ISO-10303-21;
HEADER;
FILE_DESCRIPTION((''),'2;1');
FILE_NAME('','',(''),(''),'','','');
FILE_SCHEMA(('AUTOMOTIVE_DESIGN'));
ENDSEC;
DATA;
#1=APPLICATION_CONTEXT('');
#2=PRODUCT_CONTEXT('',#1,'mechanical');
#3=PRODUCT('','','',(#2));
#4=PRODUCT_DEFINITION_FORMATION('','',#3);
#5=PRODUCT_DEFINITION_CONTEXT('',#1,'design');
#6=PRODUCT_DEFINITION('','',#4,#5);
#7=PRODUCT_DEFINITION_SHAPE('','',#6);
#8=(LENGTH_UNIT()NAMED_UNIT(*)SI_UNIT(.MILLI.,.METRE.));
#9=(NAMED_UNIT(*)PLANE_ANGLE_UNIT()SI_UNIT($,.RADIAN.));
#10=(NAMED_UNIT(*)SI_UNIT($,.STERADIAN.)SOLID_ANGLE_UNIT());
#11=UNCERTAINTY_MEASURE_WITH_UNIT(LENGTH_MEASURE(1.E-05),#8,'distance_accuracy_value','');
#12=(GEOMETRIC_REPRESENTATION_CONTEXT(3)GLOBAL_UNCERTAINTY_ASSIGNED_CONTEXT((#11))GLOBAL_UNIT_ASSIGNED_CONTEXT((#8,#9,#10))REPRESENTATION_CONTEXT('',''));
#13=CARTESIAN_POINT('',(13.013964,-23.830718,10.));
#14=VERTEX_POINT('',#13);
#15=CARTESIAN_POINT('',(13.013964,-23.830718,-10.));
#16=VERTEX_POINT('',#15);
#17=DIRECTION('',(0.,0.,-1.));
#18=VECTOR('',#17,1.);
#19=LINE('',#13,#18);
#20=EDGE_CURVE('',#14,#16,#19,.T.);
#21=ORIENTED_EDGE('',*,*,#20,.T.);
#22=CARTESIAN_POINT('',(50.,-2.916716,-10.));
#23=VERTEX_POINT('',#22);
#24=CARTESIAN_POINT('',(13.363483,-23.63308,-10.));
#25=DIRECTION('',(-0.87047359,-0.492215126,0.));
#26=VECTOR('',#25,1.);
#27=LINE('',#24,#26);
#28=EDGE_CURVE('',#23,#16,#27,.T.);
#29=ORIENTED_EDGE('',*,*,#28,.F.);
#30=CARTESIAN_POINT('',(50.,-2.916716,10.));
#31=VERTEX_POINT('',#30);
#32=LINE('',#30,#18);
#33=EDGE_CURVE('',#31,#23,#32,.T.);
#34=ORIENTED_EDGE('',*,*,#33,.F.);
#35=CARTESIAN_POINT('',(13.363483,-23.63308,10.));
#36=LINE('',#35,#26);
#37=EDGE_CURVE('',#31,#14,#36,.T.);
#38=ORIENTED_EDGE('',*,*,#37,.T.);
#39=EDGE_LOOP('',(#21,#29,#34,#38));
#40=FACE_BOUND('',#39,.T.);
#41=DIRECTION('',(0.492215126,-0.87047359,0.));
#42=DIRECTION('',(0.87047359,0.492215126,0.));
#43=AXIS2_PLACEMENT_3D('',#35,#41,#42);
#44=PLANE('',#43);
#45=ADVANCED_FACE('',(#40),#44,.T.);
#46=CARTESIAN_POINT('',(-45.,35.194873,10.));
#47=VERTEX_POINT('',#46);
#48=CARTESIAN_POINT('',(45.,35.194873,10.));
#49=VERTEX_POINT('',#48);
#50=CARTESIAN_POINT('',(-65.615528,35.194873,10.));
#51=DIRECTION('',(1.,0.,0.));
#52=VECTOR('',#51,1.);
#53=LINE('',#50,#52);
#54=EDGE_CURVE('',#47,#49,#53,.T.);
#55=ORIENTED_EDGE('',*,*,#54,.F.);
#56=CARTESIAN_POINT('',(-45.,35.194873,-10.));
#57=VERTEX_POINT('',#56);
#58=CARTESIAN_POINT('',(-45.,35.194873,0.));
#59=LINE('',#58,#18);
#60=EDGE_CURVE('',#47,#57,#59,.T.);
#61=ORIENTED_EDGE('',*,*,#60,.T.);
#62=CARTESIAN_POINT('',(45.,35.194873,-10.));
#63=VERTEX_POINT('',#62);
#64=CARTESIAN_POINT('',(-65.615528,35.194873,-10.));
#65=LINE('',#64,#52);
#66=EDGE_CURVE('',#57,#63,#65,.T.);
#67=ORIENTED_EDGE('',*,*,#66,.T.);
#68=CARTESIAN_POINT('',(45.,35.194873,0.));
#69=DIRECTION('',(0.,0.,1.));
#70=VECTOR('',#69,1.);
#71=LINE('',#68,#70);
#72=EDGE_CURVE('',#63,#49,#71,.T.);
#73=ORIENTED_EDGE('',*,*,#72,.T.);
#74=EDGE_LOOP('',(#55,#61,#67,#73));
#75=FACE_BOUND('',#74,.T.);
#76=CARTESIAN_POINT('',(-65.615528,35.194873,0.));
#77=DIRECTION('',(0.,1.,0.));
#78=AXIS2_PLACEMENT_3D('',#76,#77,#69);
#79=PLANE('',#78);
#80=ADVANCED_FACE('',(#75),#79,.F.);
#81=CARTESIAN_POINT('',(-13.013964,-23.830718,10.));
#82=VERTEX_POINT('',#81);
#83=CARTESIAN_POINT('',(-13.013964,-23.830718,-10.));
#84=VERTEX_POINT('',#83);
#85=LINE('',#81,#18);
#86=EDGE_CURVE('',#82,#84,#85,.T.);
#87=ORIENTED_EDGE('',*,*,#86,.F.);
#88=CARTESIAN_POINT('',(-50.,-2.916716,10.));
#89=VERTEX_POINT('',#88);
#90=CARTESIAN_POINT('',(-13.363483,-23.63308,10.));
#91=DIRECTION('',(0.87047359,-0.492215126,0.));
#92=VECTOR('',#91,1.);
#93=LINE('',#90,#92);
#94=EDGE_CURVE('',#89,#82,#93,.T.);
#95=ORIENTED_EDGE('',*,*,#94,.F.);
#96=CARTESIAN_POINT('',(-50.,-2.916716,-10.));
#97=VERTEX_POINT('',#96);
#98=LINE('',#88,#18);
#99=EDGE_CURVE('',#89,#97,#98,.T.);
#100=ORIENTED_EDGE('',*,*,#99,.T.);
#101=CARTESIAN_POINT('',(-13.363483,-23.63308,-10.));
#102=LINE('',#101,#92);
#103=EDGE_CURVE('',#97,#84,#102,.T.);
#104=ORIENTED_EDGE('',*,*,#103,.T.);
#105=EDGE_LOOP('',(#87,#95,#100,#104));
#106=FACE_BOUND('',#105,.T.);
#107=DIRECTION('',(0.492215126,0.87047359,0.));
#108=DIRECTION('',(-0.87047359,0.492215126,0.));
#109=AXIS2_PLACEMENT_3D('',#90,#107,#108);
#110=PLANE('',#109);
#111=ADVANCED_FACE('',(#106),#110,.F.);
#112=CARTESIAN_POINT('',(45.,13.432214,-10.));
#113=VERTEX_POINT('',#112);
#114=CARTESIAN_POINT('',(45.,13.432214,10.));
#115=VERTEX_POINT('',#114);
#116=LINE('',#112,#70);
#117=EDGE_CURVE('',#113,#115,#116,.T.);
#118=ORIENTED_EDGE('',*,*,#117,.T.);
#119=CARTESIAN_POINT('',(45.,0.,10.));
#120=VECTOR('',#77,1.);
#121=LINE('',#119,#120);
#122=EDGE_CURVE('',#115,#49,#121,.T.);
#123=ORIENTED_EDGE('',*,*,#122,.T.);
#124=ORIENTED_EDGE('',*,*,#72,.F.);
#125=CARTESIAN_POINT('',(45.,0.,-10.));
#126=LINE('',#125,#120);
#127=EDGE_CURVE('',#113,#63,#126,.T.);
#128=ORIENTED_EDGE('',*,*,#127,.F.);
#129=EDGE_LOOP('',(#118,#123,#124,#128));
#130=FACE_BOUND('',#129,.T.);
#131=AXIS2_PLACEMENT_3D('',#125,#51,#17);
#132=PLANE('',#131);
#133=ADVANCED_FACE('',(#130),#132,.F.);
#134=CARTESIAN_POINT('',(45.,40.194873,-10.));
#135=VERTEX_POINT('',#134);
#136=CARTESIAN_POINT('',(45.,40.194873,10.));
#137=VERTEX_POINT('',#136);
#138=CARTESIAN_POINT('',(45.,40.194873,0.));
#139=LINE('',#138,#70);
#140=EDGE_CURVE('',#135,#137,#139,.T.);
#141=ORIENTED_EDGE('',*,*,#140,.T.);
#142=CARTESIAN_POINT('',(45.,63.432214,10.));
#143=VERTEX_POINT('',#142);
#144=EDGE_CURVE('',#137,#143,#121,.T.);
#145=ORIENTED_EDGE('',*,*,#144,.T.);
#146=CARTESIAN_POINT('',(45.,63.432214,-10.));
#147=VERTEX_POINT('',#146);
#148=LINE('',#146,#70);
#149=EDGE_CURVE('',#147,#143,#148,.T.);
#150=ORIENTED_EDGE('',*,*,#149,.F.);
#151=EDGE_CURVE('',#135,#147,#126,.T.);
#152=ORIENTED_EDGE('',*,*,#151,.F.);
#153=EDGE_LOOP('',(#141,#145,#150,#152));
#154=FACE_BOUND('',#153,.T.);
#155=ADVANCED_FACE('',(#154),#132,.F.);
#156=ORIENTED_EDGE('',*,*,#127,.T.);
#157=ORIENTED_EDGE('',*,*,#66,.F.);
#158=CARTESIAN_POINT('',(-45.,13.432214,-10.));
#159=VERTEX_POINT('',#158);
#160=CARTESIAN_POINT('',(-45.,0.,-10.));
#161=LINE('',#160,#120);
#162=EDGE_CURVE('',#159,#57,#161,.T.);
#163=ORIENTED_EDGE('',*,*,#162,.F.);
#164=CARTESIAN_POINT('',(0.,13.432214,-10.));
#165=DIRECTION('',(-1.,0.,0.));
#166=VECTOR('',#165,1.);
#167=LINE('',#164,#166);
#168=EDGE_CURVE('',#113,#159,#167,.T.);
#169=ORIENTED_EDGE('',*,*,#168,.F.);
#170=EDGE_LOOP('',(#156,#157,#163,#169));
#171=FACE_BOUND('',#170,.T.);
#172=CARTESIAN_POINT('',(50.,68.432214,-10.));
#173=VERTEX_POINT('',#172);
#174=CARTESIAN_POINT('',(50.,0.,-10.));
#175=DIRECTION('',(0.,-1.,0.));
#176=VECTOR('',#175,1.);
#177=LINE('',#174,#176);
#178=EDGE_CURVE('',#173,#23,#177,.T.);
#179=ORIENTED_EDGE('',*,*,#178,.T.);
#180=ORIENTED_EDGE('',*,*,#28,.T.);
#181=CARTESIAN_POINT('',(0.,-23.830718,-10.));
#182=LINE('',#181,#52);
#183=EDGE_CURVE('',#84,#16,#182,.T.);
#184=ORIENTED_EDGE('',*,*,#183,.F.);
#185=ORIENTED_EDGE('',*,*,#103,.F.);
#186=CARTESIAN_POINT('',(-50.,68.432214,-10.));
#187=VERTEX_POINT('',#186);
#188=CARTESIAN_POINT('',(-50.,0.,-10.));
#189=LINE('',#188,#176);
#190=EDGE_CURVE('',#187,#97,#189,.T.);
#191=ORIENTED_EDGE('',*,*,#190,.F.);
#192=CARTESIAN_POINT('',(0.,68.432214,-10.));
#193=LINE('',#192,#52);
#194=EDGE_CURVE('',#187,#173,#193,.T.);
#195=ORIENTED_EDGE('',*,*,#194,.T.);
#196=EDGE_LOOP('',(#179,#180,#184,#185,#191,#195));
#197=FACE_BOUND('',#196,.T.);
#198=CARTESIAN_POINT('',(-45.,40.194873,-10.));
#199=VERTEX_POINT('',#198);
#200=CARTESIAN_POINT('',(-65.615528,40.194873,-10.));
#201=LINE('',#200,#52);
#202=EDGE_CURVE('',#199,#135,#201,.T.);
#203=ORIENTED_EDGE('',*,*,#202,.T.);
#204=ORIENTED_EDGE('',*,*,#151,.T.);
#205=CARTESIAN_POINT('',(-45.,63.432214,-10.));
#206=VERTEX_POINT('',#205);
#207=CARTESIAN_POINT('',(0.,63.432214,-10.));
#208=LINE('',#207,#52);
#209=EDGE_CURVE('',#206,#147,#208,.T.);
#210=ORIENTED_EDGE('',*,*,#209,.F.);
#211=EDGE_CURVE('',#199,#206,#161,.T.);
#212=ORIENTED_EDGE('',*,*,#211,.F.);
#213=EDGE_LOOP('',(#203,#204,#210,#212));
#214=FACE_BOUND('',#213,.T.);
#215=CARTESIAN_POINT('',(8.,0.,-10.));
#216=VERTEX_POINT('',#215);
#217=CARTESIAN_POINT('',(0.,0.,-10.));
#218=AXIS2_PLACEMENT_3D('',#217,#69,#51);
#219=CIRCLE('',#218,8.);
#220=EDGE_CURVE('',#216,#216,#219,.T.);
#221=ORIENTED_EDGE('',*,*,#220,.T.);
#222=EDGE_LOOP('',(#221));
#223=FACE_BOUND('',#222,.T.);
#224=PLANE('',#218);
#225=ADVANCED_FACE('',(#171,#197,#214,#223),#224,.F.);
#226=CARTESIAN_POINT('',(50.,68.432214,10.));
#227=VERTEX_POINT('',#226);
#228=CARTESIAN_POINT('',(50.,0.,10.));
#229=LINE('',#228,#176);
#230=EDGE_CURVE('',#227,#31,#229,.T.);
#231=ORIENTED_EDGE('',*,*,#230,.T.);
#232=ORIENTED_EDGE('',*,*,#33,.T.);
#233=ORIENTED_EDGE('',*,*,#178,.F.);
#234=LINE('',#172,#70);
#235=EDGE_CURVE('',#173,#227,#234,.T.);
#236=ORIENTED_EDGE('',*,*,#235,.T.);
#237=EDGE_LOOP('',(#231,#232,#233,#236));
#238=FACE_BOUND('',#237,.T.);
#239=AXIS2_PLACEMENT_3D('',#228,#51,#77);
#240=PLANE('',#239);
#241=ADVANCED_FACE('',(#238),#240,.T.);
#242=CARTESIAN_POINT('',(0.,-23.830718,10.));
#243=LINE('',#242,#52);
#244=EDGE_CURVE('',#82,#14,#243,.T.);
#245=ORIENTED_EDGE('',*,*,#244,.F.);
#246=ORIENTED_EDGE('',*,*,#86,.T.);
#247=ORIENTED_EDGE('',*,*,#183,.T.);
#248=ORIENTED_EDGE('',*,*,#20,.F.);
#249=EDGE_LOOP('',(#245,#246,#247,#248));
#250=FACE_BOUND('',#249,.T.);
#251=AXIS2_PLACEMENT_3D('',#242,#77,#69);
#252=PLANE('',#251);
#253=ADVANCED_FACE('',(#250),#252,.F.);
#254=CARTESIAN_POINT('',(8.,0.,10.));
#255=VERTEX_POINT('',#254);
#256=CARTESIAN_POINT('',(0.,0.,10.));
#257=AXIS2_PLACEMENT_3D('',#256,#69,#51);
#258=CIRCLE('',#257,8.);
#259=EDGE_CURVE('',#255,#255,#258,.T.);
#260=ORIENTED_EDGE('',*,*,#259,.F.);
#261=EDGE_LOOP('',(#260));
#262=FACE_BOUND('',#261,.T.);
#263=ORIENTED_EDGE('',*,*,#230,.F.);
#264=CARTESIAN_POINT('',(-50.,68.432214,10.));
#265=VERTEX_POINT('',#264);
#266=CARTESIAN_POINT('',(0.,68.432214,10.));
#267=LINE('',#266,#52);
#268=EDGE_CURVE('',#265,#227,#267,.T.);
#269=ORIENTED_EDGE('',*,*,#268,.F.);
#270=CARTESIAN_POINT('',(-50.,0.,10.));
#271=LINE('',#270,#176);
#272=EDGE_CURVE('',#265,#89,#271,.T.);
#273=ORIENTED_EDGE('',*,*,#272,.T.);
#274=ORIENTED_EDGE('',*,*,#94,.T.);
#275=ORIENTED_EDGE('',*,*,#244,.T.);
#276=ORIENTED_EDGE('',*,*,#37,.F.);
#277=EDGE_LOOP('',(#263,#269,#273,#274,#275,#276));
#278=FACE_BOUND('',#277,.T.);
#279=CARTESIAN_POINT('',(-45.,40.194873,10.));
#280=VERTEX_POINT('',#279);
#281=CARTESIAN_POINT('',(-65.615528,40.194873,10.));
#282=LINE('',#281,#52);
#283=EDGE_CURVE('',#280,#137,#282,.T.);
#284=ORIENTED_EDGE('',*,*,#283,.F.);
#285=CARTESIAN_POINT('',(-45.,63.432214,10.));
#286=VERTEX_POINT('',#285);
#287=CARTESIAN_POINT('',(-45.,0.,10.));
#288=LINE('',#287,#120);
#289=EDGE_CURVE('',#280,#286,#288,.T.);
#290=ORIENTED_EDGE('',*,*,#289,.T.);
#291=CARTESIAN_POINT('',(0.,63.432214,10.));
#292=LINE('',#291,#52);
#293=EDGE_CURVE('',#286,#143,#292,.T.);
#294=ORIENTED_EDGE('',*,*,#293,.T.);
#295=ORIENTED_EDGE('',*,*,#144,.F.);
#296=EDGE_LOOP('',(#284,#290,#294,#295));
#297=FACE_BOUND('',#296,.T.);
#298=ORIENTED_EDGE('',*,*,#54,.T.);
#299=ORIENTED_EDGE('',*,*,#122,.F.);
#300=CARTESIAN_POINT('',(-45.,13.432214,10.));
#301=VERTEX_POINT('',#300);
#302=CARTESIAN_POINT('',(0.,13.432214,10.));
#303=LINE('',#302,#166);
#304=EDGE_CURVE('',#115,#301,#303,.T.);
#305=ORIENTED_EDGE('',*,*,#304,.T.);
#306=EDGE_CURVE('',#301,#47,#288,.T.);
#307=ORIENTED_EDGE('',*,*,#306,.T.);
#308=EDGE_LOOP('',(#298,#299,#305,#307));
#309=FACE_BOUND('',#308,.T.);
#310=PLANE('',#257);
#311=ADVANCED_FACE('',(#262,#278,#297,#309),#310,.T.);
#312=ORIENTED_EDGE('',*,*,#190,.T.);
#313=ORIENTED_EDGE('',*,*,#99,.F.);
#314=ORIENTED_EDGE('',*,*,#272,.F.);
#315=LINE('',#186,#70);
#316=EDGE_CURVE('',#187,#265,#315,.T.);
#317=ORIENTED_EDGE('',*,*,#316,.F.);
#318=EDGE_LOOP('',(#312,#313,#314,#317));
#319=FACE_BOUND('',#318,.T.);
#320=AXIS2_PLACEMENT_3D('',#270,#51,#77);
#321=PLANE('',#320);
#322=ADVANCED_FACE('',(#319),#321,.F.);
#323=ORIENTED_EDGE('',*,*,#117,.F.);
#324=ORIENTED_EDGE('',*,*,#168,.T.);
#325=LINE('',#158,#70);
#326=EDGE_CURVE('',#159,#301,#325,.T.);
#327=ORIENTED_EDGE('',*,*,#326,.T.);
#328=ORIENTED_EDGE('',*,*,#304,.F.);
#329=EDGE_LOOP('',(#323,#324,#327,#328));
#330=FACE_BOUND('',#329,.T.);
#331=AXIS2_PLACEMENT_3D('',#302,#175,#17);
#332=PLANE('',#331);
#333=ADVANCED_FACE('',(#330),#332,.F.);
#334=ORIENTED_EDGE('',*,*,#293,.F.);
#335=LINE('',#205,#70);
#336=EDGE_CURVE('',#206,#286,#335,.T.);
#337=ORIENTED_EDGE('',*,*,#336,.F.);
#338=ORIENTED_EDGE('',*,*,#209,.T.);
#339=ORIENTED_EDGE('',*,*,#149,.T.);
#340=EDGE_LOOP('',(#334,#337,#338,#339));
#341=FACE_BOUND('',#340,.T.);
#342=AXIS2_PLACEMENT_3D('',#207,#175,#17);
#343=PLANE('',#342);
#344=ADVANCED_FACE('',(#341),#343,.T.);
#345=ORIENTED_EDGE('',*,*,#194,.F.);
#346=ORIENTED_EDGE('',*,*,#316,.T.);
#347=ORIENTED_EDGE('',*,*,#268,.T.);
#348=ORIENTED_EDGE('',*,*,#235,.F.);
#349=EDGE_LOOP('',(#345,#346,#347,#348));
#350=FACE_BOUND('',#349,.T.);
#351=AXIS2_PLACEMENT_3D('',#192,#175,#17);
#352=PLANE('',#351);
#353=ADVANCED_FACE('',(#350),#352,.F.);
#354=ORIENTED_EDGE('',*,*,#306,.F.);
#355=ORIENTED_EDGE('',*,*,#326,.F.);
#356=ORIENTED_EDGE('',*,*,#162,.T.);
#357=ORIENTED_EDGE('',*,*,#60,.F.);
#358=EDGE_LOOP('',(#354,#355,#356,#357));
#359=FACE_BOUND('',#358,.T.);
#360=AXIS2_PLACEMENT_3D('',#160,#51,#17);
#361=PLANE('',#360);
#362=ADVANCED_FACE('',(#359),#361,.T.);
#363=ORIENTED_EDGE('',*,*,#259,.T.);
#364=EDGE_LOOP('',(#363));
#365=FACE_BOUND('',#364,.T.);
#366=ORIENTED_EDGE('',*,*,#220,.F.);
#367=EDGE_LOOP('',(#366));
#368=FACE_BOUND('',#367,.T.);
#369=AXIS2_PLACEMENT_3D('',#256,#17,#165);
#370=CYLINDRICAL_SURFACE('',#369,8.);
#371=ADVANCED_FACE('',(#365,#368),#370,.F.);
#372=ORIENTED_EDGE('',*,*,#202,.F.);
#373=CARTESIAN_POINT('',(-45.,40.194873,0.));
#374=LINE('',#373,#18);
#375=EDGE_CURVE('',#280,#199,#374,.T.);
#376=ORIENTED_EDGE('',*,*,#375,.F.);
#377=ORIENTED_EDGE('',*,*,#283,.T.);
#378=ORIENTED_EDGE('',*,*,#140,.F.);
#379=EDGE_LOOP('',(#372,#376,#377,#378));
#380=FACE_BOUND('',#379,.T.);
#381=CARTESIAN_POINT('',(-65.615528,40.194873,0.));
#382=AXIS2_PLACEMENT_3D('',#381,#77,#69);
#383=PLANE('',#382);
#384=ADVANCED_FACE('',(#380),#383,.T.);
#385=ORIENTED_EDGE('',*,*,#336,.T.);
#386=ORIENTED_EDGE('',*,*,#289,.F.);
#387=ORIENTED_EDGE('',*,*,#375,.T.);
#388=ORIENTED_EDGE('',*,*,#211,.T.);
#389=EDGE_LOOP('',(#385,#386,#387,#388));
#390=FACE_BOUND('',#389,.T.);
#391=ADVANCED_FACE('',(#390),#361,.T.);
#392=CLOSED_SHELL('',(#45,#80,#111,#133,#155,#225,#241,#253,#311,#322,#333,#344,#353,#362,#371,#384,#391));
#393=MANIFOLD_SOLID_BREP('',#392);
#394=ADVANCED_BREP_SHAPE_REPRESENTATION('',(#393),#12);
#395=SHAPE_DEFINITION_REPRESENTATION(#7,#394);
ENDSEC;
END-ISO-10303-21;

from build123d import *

# Parameters (mm, degrees)
BOSS_EXTRUDE2_DEPTH      = 10
BOSS_EXTRUDE2_DEPTH_BACK = 10
EXTRUDE_THIN2_START      = -10
EXTRUDE_THIN2_DEPTH      = 20
SKETCH2_W                = 20
SKETCH2_H                = 2.5
BOSS_EXTRUDE3_DEPTH      = 90


# Read off the part's stored shape, not the designer's step: Extrude-Thin2
with BuildPart() as part:
    # Sketch1 → Boss-Extrude2 (new, two sides: drawn at the far end of the back side and taken through both)
    with BuildSketch(Plane.XY.offset(-BOSS_EXTRUDE2_DEPTH_BACK)):
        Polygon((-13.01396445, -23.830717844), (0, -23.830717844), (0, -18.830717844), (-11.698214449, -18.830717844), (-45, 0), (-45, 13.432214294), (-50, 13.432214294), (-50, -2.916716145), align=None)
        Polygon((0, -18.830717844), (0, -23.830717844), (13.01396445, -23.830717844), (50, -2.916716145), (50, 13.432214294), (45, 13.432214294), (45, 0), (11.698214449, -18.830717844), align=None)
        with BuildLine():
            Line((-11.698214449, -18.830717844), (0, -18.830717844))
            Line((0, -18.830717844), (0, -8))
            ThreePointArc((0, -8), (-8, 0), (0, 8))
            Line((0, 8), (0, 13.432214294))
            Line((0, 13.432214294), (-45, 13.432214294))
            Line((-45, 13.432214294), (-45, 0))
            Line((-45, 0), (-11.698214449, -18.830717844))
        make_face()
        with BuildLine():
            Line((0, -8), (0, -18.830717844))
            Line((0, -18.830717844), (11.698214449, -18.830717844))
            Line((11.698214449, -18.830717844), (45, 0))
            Line((45, 0), (45, 13.432214294))
            Line((45, 13.432214294), (0, 13.432214294))
            Line((0, 13.432214294), (0, 8))
            ThreePointArc((0, 8), (5.656854249, 5.656854249), (8, 0))
            ThreePointArc((8, 0), (5.656854249, -5.656854249), (0, -8))
        make_face()
    extrude(amount=BOSS_EXTRUDE2_DEPTH + BOSS_EXTRUDE2_DEPTH_BACK)

    # Extrude-Thin2 outline → Extrude-Thin2 (add)
    with BuildSketch(Plane.XY.offset(EXTRUDE_THIN2_START)):
        Polygon((45, 13.432214294), (50, 13.432214294), (50, 68.432214294), (-50, 68.432214294), (-50, 13.432214294), (-45, 13.432214294), (-45, 63.432214294), (45, 63.432214294), align=None)
    extrude(amount=EXTRUDE_THIN2_DEPTH)

    # Sketch2 → Boss-Extrude3 (add)
    with BuildSketch(Plane.ZY.offset(-45)):
        with Locations((0, 38.944873029)):
            Rectangle(SKETCH2_W, SKETCH2_H)
        with Locations((0, 36.444873029)):
            Rectangle(SKETCH2_W, SKETCH2_H)
    extrude(amount=BOSS_EXTRUDE3_DEPTH)


solid = part.part
